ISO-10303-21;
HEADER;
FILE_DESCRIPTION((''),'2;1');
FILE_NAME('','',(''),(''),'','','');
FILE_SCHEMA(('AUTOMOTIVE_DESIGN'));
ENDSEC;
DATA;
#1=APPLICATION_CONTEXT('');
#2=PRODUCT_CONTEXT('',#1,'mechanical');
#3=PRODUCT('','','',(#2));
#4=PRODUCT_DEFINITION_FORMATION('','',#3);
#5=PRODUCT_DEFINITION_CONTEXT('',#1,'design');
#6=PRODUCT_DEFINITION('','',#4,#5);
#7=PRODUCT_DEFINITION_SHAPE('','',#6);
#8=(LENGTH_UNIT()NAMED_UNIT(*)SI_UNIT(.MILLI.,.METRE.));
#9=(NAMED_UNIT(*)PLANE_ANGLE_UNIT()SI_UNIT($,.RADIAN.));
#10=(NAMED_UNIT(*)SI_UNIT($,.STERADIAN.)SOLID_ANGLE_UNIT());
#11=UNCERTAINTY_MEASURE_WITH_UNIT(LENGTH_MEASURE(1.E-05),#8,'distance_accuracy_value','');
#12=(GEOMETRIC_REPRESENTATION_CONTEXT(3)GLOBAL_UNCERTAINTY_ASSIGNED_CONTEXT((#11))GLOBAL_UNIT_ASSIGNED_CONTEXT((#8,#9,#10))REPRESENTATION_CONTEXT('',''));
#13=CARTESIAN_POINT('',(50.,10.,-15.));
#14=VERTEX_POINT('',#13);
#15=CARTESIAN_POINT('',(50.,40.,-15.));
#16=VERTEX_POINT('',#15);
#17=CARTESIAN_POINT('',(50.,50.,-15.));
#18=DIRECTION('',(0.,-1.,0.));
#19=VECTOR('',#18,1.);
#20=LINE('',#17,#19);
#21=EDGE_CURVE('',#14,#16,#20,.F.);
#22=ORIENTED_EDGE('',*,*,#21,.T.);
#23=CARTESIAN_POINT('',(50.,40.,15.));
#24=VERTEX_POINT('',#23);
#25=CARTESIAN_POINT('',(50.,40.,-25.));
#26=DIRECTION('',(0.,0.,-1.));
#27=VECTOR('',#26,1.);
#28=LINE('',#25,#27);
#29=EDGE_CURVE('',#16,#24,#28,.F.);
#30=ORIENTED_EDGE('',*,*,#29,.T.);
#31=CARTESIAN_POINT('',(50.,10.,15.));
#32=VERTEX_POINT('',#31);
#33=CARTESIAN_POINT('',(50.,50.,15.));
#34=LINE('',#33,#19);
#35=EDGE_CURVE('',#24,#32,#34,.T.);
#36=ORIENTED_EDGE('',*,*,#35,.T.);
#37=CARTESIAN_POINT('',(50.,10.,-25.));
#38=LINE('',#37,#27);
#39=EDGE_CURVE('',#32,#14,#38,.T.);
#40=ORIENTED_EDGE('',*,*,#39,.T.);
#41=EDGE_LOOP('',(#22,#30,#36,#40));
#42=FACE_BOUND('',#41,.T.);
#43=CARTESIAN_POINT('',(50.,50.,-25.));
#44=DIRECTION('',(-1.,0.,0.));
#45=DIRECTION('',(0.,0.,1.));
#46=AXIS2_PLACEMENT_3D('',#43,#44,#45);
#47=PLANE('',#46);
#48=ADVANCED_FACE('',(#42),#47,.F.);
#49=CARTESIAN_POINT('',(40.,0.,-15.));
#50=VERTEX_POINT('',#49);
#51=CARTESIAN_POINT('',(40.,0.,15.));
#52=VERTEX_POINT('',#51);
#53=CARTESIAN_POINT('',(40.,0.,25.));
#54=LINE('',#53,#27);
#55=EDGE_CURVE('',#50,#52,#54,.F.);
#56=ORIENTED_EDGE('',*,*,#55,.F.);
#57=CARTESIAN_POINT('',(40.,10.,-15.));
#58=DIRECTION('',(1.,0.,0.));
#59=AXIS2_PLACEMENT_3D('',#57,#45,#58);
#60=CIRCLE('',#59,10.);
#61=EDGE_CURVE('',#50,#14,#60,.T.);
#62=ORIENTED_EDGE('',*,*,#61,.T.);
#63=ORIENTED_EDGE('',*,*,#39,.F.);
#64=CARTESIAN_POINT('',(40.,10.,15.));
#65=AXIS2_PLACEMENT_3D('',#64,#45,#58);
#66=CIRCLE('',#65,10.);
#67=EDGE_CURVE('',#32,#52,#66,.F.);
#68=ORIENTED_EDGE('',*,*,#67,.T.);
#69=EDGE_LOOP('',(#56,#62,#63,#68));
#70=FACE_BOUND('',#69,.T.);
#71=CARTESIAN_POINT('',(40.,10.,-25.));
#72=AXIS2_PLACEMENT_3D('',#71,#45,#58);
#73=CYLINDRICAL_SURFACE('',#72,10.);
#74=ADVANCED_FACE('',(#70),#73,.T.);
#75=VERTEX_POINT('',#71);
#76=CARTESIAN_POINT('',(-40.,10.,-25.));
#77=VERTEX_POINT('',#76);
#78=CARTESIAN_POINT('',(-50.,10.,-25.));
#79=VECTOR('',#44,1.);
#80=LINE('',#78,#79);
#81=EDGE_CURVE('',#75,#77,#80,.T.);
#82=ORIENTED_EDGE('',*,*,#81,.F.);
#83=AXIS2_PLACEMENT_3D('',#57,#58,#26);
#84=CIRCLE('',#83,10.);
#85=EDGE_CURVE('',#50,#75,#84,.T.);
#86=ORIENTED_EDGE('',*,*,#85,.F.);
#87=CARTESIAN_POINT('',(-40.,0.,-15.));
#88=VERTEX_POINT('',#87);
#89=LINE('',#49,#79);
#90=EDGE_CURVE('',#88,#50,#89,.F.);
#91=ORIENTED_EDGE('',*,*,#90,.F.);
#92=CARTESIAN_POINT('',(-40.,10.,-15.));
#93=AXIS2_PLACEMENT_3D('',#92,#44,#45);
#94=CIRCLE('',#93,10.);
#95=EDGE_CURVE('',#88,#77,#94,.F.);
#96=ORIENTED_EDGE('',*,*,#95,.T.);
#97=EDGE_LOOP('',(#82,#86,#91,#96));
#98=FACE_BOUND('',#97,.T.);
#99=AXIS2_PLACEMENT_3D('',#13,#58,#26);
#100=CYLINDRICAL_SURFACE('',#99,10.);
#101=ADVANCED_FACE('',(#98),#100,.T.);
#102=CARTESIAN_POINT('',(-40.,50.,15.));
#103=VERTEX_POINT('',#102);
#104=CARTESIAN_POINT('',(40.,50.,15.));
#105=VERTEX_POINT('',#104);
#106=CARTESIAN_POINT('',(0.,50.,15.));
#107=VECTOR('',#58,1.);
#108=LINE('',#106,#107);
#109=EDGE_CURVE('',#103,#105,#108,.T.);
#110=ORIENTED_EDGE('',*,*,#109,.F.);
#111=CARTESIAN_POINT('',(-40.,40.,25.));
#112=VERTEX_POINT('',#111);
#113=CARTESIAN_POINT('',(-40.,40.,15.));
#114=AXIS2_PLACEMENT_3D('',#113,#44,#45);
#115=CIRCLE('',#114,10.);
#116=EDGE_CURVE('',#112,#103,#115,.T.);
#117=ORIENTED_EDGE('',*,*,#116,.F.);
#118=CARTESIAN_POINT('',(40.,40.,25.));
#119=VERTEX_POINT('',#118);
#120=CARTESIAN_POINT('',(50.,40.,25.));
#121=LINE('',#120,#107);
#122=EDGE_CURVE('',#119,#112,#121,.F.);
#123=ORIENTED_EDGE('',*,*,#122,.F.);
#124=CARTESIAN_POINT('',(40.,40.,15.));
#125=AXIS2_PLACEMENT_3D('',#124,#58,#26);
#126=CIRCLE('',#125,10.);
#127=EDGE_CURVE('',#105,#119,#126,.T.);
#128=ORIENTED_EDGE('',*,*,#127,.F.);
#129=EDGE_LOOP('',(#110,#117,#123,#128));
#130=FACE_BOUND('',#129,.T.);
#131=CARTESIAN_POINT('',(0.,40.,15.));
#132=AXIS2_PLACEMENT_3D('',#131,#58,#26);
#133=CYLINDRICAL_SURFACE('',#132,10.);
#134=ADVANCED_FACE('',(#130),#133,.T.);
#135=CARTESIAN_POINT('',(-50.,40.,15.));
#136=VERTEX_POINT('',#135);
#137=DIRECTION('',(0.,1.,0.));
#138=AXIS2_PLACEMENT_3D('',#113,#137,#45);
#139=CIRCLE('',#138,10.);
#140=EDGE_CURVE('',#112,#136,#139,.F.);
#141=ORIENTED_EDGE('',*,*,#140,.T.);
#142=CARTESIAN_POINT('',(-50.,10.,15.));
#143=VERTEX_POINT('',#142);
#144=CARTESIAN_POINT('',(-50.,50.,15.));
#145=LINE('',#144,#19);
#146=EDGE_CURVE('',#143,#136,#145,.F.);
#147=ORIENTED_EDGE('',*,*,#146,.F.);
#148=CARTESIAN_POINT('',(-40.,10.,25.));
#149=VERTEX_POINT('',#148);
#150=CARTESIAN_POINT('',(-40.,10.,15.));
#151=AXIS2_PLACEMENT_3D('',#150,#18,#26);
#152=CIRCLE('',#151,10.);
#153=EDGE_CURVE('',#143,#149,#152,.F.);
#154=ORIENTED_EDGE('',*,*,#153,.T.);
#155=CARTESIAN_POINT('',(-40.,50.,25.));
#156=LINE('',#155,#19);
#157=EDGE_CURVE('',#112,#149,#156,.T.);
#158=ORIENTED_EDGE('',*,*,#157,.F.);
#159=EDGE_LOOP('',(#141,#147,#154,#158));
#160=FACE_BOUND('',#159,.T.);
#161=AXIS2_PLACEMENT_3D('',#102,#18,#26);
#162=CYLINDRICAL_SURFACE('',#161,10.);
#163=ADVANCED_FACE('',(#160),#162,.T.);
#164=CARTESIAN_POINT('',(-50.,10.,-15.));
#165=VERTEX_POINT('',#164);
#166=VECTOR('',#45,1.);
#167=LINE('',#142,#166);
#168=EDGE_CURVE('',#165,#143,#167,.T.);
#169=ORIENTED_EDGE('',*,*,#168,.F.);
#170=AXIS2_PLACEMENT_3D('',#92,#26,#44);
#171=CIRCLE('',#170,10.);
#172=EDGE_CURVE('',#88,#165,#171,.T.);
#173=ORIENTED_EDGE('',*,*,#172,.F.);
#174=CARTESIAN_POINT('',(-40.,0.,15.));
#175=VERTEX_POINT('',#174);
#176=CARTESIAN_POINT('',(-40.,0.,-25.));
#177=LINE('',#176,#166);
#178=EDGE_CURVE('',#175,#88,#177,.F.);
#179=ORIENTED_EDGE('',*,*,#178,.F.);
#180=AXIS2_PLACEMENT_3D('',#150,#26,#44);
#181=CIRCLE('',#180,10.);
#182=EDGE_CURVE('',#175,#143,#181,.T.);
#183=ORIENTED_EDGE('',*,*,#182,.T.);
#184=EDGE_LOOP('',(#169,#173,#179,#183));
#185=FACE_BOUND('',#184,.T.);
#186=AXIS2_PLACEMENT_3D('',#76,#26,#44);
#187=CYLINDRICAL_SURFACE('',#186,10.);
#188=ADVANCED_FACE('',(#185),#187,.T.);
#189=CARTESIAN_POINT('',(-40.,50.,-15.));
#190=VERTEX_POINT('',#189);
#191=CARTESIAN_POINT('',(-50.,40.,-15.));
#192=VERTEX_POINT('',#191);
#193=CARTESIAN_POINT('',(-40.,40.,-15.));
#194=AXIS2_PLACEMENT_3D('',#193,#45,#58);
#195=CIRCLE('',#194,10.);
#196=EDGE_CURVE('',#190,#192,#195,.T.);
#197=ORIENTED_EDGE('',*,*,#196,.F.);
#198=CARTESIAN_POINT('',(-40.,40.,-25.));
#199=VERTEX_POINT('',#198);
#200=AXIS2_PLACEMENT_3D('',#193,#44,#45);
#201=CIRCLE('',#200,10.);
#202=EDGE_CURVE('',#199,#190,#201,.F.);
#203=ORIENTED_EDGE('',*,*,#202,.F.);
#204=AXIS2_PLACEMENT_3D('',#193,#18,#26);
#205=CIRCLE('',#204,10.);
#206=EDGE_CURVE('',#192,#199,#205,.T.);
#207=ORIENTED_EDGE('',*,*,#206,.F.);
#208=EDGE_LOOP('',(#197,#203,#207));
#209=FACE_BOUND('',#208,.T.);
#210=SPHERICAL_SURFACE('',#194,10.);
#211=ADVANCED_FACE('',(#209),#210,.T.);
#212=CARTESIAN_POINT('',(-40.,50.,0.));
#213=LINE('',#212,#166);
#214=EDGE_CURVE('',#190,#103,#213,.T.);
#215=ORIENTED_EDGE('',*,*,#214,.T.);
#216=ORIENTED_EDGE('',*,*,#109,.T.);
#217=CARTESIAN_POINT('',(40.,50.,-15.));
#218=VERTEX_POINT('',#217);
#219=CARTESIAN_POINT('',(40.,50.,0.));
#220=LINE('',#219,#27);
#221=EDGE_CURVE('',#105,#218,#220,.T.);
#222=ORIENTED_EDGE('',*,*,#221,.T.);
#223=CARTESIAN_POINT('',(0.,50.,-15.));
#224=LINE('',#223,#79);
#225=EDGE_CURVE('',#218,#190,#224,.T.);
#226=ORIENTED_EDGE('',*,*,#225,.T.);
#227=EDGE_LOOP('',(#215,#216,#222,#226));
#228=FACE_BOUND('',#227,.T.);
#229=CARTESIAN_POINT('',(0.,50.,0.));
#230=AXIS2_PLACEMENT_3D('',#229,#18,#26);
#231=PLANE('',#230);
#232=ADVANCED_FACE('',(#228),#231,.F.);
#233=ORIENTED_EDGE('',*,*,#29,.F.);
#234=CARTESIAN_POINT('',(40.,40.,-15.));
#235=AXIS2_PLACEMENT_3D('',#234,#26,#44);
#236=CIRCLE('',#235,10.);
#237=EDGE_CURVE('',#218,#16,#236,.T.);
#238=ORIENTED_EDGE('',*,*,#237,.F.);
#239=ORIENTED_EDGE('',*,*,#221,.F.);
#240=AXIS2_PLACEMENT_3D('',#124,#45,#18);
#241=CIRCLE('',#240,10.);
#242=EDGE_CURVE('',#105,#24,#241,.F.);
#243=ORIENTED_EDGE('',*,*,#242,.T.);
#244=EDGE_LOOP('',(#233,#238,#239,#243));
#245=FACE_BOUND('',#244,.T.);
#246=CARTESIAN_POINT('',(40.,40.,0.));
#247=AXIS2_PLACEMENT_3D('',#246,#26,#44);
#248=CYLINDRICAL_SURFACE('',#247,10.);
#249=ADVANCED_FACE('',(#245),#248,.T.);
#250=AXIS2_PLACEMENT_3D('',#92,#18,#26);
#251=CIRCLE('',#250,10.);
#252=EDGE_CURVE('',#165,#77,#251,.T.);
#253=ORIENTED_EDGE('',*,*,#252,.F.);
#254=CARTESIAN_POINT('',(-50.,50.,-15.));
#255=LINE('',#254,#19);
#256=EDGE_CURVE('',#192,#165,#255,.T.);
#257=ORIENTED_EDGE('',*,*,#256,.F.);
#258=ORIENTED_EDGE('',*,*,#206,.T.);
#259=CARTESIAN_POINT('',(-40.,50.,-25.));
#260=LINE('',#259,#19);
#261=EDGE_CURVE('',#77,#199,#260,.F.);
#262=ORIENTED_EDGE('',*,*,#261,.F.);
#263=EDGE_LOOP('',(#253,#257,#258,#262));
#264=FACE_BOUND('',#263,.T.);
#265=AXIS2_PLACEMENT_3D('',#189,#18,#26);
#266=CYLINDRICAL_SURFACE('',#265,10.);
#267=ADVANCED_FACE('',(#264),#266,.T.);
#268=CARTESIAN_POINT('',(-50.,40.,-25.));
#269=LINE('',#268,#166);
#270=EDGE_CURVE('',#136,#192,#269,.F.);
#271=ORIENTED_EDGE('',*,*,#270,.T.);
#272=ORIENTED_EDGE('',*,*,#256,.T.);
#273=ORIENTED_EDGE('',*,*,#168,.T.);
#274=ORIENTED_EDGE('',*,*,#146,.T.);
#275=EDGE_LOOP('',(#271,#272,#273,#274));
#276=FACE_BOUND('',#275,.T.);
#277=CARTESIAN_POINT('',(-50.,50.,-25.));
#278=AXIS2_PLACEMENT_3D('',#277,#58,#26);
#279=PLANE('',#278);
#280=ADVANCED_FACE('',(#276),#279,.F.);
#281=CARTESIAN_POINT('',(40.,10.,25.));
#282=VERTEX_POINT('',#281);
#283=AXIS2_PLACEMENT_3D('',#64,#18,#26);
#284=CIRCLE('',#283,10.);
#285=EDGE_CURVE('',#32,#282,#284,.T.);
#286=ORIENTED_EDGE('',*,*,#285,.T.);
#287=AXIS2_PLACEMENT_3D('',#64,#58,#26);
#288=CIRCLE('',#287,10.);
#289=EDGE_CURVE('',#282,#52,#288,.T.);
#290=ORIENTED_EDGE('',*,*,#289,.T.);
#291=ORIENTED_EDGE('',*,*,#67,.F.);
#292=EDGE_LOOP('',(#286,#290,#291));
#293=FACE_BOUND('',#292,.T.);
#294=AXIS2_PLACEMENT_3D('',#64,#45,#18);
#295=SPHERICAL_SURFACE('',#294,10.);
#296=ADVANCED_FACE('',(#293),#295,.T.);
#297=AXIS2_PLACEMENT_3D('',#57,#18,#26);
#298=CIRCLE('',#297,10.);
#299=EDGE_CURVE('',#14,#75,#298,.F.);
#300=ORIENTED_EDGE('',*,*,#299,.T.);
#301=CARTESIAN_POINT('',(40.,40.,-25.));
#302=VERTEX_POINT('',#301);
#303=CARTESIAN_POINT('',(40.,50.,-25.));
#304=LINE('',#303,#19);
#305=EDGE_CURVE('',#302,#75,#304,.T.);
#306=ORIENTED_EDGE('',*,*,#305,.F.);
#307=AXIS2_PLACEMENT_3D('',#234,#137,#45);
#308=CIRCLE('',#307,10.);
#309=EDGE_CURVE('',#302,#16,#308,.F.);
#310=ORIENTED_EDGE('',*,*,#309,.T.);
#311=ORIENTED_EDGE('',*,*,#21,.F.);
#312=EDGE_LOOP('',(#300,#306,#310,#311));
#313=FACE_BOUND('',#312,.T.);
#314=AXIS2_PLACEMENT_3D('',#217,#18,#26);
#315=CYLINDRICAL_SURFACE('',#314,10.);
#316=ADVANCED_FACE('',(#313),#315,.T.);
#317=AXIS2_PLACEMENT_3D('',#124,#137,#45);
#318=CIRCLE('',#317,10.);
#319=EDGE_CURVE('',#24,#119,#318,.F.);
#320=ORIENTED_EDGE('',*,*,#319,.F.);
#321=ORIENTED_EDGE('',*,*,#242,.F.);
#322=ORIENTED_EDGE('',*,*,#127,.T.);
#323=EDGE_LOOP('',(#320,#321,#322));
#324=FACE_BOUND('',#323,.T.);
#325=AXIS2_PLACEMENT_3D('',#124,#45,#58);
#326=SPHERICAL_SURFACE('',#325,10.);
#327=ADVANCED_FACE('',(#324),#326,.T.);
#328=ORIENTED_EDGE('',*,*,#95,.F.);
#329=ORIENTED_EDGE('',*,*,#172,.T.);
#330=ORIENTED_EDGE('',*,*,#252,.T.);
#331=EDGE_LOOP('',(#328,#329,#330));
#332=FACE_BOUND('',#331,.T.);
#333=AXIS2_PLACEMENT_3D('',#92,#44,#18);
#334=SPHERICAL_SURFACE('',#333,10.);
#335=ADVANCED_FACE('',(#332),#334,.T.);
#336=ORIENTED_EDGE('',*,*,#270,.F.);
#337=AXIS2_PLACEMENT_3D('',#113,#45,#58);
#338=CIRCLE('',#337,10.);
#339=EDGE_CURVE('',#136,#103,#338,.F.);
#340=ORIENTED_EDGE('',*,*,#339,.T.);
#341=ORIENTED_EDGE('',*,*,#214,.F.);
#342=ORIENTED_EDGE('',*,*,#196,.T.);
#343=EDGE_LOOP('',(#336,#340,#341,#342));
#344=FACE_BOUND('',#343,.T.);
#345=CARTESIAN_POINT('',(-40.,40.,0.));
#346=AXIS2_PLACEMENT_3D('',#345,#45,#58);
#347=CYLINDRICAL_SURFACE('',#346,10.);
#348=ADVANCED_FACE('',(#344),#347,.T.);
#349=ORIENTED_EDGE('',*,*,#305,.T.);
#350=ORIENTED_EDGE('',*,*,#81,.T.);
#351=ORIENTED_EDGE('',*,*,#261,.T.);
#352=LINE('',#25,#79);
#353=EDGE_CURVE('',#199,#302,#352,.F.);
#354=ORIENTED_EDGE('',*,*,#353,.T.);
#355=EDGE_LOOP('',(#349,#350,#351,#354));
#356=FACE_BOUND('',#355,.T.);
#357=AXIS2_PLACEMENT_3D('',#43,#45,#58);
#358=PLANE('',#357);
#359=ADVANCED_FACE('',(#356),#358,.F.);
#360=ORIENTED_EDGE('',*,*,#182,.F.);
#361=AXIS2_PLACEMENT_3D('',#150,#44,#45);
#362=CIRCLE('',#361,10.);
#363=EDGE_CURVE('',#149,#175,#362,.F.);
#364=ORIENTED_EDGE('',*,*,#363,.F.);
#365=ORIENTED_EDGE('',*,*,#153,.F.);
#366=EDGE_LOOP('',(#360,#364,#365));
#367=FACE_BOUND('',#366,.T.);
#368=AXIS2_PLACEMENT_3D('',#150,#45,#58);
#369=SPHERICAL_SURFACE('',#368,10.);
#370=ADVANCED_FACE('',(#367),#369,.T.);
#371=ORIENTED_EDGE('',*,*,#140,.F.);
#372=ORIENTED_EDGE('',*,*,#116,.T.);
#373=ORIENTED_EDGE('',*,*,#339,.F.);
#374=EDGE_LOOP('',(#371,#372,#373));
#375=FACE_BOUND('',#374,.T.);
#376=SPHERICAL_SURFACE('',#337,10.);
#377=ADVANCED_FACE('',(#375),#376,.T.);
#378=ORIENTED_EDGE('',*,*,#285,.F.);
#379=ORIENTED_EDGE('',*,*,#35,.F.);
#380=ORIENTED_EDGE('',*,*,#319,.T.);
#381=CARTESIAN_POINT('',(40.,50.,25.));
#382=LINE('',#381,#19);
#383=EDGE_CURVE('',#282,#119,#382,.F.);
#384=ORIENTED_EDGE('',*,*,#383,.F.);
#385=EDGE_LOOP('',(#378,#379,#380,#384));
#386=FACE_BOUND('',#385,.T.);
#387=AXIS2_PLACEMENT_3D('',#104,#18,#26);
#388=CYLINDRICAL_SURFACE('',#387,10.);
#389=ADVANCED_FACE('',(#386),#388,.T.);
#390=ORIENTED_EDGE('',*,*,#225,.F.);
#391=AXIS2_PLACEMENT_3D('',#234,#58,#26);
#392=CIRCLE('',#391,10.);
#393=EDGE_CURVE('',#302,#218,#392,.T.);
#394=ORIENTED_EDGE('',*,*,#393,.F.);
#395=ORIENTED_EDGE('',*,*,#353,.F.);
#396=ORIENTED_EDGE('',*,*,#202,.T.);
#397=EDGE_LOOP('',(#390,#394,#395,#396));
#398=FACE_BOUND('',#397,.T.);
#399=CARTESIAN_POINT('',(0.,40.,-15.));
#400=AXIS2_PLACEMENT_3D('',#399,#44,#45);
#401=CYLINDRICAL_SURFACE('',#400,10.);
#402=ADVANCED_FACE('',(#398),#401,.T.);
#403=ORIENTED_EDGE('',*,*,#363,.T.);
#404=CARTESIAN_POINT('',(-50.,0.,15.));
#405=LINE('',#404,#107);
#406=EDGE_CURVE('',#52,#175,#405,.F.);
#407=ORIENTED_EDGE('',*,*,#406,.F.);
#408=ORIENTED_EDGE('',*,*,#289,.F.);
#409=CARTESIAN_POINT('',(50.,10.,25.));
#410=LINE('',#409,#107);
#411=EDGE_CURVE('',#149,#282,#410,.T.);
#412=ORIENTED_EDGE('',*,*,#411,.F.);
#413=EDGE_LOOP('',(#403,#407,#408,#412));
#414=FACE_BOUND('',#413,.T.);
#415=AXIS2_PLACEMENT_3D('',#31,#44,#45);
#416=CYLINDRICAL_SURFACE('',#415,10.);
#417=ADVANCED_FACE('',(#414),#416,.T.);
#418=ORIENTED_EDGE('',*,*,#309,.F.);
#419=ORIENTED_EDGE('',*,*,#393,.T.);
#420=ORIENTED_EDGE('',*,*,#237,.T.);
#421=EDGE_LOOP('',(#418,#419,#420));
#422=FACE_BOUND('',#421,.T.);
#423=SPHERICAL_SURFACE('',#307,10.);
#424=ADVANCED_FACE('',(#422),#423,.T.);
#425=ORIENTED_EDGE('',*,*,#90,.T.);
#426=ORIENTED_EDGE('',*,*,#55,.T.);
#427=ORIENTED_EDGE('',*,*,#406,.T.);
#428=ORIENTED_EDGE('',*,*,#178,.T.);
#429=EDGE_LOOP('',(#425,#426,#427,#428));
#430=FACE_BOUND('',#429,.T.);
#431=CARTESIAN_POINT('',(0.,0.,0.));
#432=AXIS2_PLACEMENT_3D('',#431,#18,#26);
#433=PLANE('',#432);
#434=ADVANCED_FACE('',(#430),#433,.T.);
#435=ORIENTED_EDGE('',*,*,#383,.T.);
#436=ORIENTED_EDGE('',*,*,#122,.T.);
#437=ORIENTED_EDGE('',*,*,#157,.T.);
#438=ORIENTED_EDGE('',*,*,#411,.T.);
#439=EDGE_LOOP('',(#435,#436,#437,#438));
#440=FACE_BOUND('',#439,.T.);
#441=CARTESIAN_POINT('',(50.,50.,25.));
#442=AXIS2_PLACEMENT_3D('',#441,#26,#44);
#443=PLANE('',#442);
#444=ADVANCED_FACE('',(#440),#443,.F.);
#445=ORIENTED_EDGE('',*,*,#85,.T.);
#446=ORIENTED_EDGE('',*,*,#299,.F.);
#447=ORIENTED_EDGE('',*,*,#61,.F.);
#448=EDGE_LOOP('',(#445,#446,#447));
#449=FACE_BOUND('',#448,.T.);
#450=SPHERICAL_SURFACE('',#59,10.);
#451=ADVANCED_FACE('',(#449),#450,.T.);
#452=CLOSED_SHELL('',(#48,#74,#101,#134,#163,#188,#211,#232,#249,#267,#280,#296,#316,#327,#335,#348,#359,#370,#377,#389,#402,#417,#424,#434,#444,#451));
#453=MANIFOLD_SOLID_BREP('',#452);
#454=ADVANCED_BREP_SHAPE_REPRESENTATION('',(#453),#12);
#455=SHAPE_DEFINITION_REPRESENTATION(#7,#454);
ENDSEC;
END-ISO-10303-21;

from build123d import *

# Parameters (mm, degrees)
SKETCH1_W           = 100
SKETCH1_H           = 50
BOSS_EXTRUDE1_DEPTH = 50
FILLET1_R           = 10
FILLET2_R           = 10


with BuildPart() as part:
    # Sketch1 → Boss-Extrude1 (new body)
    with BuildSketch(Plane(origin=(0, 0, 0), x_dir=(1, 0, 0), z_dir=(0, 1, 0))):
        Rectangle(SKETCH1_W, SKETCH1_H)
    extrude(amount=BOSS_EXTRUDE1_DEPTH)

    # Fillet1
    fillet1_edges = [part.edges().sort_by_distance(p)[0] for p in [
        (50, 50, 0),
        (0, 50, -25),
        (-50, 50, 0),
        (50, 0, 0),
        (0, 0, 25),
        (50, 25, -25),
        (50, 25, 25),
        (-50, 25, 25),
        (0, 50, 25),
    ]]
    fillet(fillet1_edges, radius=FILLET1_R)

    # Fillet2
    # the kernel refuses this fillet: 10 mm, written as the material it takes off along each edge
    with BuildSketch(Plane(origin=(-40, 10, 15), x_dir=(0, -1, 0), z_dir=(-1, 0, 0))) as fillet2_piece_1_section:
        Polygon((0, 0), (FILLET2_R, 0), (FILLET2_R, FILLET2_R), (0, FILLET2_R), align=None)
    fillet2_piece_1 = extrude(amount=FILLET2_R, mode=Mode.PRIVATE)
    fillet2_piece_1 = fillet2_piece_1 - Plane(origin=(-40, 10, 15), x_dir=(0, 0.7071067811865475, -0.7071067811865475), z_dir=(-1, 0, 0)) * Sphere(FILLET2_R, mode=Mode.PRIVATE)
    add(fillet2_piece_1, mode=Mode.SUBTRACT)
    with BuildSketch(Plane(origin=(-40, 40, -15), x_dir=(-1, 0, 0), z_dir=(0, 0, -1))) as fillet2_piece_2_section:
        Polygon((0, 0), (FILLET2_R, 0), (FILLET2_R, FILLET2_R), (0, FILLET2_R), align=None)
    fillet2_piece_2 = extrude(amount=FILLET2_R, mode=Mode.PRIVATE)
    fillet2_piece_2 = fillet2_piece_2 - Plane(origin=(-40, 40, -15), x_dir=(0.7071067811865475, -0.7071067811865475, 0), z_dir=(0, 0, -1)) * Sphere(FILLET2_R, mode=Mode.PRIVATE)
    add(fillet2_piece_2, mode=Mode.SUBTRACT)
    with BuildSketch(Plane(origin=(40, 10, -15), x_dir=(0, -1, 0), z_dir=(0, 0, -1))) as fillet2_piece_3_section:
        Polygon((0, 0), (FILLET2_R, 0), (FILLET2_R, -FILLET2_R), (0, -FILLET2_R), align=None)
    fillet2_piece_3 = extrude(amount=FILLET2_R, mode=Mode.PRIVATE)
    fillet2_piece_3 = fillet2_piece_3 - Plane(origin=(40, 10, -15), x_dir=(-0.7071067811865475, 0.7071067811865475, 0), z_dir=(0, 0, -1)) * Sphere(FILLET2_R, mode=Mode.PRIVATE)
    add(fillet2_piece_3, mode=Mode.SUBTRACT)
    with BuildSketch(Plane(origin=(-40, 10, -15), x_dir=(-1, 0, 0), z_dir=(0, 0, -1))) as fillet2_piece_4_section:
        Polygon((0, 0), (FILLET2_R, 0), (FILLET2_R, -FILLET2_R), (0, -FILLET2_R), align=None)
    fillet2_piece_4 = extrude(amount=FILLET2_R, mode=Mode.PRIVATE)
    fillet2_piece_4 = fillet2_piece_4 - Plane(origin=(-40, 10, -15), x_dir=(0.7071067811865475, 0.7071067811865475, 0), z_dir=(0, 0, -1)) * Sphere(FILLET2_R, mode=Mode.PRIVATE)
    add(fillet2_piece_4, mode=Mode.SUBTRACT)
    with BuildSketch(Plane(origin=(40, 0, -25), x_dir=(0, 1, 0), z_dir=(-1, 0, 0))) as fillet2_piece_5:
        with BuildLine():
            CenterArc((FILLET2_R, -FILLET2_R), FILLET2_R, 90, 90)
            Line((0, -FILLET2_R), (0, 0))
            Line((0, 0), (FILLET2_R, 0))
        make_face()
    extrude(amount=80, mode=Mode.SUBTRACT)
    with BuildSketch(Plane(origin=(-50, 10, -25), x_dir=(1, 0, 0), z_dir=(0, 1, 0)), Plane(origin=(-50, 0, -15), x_dir=(0, 1, 0), z_dir=(0, 0, 1))) as fillet2_piece_6:
        with BuildLine():
            CenterArc((FILLET2_R, -FILLET2_R), FILLET2_R, 90, 90)
            Line((0, -FILLET2_R), (0, 0))
            Line((0, 0), (FILLET2_R, 0))
        make_face()
    extrude(amount=30, mode=Mode.SUBTRACT)


solid = part.part
